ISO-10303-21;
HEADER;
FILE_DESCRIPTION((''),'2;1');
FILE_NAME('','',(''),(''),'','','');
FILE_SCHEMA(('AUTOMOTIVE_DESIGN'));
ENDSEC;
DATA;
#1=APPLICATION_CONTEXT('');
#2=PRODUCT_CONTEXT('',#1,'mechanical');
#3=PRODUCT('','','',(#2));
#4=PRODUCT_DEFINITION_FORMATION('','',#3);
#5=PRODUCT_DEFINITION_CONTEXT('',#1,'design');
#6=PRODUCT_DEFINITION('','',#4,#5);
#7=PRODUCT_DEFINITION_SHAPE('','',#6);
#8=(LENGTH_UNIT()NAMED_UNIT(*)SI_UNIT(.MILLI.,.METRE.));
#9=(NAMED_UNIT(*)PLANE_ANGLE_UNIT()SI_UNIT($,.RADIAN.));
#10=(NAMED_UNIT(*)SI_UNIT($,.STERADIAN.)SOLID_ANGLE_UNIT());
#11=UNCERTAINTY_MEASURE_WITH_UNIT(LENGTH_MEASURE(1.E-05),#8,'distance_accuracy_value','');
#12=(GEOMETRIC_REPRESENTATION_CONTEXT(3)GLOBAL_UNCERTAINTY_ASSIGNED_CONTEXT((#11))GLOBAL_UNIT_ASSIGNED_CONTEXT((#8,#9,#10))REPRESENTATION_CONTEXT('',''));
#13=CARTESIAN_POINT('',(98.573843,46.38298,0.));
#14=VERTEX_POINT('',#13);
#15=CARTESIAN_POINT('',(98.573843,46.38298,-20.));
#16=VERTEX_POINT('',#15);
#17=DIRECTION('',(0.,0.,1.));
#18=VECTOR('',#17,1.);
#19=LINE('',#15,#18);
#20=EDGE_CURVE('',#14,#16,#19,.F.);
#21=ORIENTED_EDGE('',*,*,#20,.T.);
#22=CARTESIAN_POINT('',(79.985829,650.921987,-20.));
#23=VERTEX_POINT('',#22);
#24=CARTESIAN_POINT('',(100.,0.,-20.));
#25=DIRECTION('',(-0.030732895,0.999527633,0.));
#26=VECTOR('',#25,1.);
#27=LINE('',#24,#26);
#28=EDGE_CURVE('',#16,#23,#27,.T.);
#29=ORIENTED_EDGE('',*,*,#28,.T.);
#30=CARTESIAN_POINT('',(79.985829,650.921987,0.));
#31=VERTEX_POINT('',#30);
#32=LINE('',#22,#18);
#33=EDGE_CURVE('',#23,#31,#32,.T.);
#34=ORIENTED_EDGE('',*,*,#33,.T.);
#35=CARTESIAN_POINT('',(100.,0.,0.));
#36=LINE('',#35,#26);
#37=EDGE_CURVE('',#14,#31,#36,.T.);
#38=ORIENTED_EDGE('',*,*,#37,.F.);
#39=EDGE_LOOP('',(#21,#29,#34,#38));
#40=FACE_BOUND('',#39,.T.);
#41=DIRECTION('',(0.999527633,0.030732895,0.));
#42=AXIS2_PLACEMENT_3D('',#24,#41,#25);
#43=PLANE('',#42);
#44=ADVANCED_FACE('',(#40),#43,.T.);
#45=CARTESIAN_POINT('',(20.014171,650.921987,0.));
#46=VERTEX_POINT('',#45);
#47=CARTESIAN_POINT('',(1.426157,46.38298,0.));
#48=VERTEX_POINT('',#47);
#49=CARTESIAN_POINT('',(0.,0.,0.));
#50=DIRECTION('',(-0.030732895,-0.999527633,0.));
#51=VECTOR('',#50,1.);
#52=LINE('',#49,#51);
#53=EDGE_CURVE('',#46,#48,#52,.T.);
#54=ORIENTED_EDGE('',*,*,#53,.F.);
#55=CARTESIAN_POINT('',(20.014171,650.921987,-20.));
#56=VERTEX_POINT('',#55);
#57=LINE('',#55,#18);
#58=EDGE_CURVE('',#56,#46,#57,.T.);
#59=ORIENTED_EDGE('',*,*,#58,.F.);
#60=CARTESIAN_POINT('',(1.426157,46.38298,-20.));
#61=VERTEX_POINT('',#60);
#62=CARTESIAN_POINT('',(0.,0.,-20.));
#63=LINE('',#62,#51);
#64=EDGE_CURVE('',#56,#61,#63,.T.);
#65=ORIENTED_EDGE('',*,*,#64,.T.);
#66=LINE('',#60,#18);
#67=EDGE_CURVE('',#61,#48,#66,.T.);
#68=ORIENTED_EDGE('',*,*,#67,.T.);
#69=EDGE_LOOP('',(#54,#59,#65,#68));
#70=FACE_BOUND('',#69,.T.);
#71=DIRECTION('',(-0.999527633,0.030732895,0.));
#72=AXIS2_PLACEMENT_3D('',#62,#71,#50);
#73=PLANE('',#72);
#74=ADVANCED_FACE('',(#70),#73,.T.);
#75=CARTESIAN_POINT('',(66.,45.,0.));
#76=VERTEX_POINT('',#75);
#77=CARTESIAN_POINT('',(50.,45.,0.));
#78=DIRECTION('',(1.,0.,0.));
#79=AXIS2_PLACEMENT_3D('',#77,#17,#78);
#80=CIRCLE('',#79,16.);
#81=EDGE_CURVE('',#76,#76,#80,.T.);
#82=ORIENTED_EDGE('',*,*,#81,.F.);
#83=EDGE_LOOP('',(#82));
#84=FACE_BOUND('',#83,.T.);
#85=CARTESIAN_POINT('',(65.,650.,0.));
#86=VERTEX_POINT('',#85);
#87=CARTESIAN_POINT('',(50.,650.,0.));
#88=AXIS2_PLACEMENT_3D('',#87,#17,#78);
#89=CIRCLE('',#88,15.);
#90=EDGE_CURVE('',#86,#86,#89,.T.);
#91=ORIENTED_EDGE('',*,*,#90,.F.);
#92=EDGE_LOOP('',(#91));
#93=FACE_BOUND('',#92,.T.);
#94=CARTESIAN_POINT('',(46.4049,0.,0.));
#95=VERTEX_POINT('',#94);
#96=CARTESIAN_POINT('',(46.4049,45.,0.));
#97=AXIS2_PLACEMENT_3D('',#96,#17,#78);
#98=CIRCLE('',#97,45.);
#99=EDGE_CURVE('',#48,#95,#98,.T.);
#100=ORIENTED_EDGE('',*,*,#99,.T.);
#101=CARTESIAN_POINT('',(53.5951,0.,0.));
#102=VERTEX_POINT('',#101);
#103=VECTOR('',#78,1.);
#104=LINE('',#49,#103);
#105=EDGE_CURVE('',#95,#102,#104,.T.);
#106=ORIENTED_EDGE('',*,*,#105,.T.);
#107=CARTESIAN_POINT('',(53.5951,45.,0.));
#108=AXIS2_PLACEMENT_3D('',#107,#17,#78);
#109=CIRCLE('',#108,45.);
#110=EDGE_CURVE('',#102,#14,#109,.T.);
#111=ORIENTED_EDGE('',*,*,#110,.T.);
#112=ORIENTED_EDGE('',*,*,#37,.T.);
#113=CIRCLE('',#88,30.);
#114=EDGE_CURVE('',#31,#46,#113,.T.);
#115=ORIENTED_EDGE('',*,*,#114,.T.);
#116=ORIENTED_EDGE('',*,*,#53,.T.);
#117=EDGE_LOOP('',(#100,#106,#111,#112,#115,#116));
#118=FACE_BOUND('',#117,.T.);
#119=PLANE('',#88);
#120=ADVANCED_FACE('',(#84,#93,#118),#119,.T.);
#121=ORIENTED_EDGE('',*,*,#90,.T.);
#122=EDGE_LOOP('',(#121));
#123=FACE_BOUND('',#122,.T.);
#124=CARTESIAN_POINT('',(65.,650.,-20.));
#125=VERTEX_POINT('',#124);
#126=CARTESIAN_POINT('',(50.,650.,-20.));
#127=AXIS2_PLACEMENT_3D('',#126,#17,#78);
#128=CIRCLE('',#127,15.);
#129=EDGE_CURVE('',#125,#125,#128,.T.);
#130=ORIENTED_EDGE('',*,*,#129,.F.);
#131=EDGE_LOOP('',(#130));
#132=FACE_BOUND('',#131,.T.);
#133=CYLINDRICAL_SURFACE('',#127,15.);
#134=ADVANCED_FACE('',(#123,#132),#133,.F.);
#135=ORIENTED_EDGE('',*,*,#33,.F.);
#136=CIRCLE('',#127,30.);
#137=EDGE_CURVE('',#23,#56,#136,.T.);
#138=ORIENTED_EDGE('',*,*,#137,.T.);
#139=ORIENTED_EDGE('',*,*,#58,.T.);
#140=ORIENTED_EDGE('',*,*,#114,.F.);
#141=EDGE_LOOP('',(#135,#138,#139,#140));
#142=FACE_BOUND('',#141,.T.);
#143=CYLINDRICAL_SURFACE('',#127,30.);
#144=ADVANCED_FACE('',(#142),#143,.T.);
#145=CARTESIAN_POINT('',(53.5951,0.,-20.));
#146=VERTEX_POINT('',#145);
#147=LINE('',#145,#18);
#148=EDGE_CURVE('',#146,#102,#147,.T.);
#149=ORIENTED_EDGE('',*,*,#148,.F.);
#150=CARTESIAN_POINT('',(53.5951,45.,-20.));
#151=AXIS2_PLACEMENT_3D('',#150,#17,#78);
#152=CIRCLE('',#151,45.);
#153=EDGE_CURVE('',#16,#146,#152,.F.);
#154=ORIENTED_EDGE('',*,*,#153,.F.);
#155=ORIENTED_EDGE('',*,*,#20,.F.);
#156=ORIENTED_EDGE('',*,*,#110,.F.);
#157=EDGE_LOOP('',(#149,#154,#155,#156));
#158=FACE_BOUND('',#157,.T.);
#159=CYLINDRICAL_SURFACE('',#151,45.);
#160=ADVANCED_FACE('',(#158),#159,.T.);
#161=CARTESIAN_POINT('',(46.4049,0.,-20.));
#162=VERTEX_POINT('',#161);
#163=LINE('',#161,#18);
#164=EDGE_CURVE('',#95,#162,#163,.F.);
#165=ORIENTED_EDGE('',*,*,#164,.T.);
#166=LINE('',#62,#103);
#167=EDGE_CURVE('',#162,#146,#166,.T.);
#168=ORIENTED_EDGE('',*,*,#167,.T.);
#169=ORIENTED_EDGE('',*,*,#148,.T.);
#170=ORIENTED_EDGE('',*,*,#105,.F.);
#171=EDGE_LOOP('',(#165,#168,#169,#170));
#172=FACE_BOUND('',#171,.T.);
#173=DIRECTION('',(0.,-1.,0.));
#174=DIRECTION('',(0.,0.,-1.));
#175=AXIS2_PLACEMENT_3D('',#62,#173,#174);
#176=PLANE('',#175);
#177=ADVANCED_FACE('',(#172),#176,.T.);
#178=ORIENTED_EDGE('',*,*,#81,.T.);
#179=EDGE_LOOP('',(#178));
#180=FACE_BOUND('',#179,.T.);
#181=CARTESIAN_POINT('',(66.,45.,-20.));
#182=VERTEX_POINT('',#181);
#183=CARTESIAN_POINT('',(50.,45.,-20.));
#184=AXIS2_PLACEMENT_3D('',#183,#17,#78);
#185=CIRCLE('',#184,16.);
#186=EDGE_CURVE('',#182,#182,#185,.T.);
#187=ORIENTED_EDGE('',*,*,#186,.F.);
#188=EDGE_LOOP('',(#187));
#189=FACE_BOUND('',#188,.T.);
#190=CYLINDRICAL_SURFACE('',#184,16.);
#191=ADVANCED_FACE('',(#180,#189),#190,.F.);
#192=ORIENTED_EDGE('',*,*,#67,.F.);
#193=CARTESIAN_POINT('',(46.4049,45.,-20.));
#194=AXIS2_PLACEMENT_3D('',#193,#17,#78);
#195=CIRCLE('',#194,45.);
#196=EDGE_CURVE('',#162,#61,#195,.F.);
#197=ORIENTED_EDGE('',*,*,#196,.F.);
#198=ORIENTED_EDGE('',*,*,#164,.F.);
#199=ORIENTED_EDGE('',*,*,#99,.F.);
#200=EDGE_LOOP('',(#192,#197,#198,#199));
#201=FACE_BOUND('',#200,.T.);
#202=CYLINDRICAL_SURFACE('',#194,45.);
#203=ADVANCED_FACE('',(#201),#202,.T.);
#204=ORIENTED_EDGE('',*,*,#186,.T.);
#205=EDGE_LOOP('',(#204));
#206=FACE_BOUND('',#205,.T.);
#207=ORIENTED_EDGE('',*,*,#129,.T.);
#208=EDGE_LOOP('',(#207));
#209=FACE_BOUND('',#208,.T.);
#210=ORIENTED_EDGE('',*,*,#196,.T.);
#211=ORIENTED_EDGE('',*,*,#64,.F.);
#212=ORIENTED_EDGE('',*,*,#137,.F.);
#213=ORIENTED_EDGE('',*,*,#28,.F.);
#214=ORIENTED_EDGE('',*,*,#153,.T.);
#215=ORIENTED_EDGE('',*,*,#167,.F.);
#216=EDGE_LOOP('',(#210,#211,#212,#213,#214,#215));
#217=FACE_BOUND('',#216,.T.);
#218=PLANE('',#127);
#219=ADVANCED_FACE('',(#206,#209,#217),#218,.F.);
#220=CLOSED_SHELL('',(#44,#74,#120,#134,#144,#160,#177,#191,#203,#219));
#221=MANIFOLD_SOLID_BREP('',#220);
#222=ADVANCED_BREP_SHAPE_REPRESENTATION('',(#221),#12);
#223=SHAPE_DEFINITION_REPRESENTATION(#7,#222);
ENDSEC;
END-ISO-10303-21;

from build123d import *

# Parameters (mm, degrees)
ESQUISSE1_R               = 15
T_LE_DE_BASE_PLI_E1_DEPTH = 20
ESQUISSE6_R               = 16
ENL_V_MAT_EXTRU_1_DEPTH   = 688.604537507
CONG_4_R                  = 45


# Sheet-metal steps are written as plain solids
with BuildPart() as part:
    # Esquisse1 → Tôle de base pliée1 (new body)
    with BuildSketch(Plane.XY):
        with BuildLine():
            Line((0, 0), (100, 0))
            Line((100, 0), (79.985828991, 650.921986845))
            ThreePointArc((79.985828991, 650.921986845), (50, 680), (20.014171009, 650.921986845))
            Line((20.014171009, 650.921986845), (0, 0))
        make_face()
        with Locations((50, 650)):
            Circle(ESQUISSE1_R, mode=Mode.SUBTRACT)
    extrude(amount=-T_LE_DE_BASE_PLI_E1_DEPTH)

    # Esquisse6 → Enlèv. mat.-Extru.1 (cut, through all)
    with BuildSketch(Plane.XY):
        with Locations((50, 45)):
            Circle(ESQUISSE6_R)
    extrude(amount=-ENL_V_MAT_EXTRU_1_DEPTH, mode=Mode.SUBTRACT)

    # Congé4
    cong_4_edges = [part.edges().sort_by_distance(p)[0] for p in [
        (100, 0, -10),
        (0, 0, -10),
    ]]
    fillet(cong_4_edges, radius=CONG_4_R)


solid = part.part
